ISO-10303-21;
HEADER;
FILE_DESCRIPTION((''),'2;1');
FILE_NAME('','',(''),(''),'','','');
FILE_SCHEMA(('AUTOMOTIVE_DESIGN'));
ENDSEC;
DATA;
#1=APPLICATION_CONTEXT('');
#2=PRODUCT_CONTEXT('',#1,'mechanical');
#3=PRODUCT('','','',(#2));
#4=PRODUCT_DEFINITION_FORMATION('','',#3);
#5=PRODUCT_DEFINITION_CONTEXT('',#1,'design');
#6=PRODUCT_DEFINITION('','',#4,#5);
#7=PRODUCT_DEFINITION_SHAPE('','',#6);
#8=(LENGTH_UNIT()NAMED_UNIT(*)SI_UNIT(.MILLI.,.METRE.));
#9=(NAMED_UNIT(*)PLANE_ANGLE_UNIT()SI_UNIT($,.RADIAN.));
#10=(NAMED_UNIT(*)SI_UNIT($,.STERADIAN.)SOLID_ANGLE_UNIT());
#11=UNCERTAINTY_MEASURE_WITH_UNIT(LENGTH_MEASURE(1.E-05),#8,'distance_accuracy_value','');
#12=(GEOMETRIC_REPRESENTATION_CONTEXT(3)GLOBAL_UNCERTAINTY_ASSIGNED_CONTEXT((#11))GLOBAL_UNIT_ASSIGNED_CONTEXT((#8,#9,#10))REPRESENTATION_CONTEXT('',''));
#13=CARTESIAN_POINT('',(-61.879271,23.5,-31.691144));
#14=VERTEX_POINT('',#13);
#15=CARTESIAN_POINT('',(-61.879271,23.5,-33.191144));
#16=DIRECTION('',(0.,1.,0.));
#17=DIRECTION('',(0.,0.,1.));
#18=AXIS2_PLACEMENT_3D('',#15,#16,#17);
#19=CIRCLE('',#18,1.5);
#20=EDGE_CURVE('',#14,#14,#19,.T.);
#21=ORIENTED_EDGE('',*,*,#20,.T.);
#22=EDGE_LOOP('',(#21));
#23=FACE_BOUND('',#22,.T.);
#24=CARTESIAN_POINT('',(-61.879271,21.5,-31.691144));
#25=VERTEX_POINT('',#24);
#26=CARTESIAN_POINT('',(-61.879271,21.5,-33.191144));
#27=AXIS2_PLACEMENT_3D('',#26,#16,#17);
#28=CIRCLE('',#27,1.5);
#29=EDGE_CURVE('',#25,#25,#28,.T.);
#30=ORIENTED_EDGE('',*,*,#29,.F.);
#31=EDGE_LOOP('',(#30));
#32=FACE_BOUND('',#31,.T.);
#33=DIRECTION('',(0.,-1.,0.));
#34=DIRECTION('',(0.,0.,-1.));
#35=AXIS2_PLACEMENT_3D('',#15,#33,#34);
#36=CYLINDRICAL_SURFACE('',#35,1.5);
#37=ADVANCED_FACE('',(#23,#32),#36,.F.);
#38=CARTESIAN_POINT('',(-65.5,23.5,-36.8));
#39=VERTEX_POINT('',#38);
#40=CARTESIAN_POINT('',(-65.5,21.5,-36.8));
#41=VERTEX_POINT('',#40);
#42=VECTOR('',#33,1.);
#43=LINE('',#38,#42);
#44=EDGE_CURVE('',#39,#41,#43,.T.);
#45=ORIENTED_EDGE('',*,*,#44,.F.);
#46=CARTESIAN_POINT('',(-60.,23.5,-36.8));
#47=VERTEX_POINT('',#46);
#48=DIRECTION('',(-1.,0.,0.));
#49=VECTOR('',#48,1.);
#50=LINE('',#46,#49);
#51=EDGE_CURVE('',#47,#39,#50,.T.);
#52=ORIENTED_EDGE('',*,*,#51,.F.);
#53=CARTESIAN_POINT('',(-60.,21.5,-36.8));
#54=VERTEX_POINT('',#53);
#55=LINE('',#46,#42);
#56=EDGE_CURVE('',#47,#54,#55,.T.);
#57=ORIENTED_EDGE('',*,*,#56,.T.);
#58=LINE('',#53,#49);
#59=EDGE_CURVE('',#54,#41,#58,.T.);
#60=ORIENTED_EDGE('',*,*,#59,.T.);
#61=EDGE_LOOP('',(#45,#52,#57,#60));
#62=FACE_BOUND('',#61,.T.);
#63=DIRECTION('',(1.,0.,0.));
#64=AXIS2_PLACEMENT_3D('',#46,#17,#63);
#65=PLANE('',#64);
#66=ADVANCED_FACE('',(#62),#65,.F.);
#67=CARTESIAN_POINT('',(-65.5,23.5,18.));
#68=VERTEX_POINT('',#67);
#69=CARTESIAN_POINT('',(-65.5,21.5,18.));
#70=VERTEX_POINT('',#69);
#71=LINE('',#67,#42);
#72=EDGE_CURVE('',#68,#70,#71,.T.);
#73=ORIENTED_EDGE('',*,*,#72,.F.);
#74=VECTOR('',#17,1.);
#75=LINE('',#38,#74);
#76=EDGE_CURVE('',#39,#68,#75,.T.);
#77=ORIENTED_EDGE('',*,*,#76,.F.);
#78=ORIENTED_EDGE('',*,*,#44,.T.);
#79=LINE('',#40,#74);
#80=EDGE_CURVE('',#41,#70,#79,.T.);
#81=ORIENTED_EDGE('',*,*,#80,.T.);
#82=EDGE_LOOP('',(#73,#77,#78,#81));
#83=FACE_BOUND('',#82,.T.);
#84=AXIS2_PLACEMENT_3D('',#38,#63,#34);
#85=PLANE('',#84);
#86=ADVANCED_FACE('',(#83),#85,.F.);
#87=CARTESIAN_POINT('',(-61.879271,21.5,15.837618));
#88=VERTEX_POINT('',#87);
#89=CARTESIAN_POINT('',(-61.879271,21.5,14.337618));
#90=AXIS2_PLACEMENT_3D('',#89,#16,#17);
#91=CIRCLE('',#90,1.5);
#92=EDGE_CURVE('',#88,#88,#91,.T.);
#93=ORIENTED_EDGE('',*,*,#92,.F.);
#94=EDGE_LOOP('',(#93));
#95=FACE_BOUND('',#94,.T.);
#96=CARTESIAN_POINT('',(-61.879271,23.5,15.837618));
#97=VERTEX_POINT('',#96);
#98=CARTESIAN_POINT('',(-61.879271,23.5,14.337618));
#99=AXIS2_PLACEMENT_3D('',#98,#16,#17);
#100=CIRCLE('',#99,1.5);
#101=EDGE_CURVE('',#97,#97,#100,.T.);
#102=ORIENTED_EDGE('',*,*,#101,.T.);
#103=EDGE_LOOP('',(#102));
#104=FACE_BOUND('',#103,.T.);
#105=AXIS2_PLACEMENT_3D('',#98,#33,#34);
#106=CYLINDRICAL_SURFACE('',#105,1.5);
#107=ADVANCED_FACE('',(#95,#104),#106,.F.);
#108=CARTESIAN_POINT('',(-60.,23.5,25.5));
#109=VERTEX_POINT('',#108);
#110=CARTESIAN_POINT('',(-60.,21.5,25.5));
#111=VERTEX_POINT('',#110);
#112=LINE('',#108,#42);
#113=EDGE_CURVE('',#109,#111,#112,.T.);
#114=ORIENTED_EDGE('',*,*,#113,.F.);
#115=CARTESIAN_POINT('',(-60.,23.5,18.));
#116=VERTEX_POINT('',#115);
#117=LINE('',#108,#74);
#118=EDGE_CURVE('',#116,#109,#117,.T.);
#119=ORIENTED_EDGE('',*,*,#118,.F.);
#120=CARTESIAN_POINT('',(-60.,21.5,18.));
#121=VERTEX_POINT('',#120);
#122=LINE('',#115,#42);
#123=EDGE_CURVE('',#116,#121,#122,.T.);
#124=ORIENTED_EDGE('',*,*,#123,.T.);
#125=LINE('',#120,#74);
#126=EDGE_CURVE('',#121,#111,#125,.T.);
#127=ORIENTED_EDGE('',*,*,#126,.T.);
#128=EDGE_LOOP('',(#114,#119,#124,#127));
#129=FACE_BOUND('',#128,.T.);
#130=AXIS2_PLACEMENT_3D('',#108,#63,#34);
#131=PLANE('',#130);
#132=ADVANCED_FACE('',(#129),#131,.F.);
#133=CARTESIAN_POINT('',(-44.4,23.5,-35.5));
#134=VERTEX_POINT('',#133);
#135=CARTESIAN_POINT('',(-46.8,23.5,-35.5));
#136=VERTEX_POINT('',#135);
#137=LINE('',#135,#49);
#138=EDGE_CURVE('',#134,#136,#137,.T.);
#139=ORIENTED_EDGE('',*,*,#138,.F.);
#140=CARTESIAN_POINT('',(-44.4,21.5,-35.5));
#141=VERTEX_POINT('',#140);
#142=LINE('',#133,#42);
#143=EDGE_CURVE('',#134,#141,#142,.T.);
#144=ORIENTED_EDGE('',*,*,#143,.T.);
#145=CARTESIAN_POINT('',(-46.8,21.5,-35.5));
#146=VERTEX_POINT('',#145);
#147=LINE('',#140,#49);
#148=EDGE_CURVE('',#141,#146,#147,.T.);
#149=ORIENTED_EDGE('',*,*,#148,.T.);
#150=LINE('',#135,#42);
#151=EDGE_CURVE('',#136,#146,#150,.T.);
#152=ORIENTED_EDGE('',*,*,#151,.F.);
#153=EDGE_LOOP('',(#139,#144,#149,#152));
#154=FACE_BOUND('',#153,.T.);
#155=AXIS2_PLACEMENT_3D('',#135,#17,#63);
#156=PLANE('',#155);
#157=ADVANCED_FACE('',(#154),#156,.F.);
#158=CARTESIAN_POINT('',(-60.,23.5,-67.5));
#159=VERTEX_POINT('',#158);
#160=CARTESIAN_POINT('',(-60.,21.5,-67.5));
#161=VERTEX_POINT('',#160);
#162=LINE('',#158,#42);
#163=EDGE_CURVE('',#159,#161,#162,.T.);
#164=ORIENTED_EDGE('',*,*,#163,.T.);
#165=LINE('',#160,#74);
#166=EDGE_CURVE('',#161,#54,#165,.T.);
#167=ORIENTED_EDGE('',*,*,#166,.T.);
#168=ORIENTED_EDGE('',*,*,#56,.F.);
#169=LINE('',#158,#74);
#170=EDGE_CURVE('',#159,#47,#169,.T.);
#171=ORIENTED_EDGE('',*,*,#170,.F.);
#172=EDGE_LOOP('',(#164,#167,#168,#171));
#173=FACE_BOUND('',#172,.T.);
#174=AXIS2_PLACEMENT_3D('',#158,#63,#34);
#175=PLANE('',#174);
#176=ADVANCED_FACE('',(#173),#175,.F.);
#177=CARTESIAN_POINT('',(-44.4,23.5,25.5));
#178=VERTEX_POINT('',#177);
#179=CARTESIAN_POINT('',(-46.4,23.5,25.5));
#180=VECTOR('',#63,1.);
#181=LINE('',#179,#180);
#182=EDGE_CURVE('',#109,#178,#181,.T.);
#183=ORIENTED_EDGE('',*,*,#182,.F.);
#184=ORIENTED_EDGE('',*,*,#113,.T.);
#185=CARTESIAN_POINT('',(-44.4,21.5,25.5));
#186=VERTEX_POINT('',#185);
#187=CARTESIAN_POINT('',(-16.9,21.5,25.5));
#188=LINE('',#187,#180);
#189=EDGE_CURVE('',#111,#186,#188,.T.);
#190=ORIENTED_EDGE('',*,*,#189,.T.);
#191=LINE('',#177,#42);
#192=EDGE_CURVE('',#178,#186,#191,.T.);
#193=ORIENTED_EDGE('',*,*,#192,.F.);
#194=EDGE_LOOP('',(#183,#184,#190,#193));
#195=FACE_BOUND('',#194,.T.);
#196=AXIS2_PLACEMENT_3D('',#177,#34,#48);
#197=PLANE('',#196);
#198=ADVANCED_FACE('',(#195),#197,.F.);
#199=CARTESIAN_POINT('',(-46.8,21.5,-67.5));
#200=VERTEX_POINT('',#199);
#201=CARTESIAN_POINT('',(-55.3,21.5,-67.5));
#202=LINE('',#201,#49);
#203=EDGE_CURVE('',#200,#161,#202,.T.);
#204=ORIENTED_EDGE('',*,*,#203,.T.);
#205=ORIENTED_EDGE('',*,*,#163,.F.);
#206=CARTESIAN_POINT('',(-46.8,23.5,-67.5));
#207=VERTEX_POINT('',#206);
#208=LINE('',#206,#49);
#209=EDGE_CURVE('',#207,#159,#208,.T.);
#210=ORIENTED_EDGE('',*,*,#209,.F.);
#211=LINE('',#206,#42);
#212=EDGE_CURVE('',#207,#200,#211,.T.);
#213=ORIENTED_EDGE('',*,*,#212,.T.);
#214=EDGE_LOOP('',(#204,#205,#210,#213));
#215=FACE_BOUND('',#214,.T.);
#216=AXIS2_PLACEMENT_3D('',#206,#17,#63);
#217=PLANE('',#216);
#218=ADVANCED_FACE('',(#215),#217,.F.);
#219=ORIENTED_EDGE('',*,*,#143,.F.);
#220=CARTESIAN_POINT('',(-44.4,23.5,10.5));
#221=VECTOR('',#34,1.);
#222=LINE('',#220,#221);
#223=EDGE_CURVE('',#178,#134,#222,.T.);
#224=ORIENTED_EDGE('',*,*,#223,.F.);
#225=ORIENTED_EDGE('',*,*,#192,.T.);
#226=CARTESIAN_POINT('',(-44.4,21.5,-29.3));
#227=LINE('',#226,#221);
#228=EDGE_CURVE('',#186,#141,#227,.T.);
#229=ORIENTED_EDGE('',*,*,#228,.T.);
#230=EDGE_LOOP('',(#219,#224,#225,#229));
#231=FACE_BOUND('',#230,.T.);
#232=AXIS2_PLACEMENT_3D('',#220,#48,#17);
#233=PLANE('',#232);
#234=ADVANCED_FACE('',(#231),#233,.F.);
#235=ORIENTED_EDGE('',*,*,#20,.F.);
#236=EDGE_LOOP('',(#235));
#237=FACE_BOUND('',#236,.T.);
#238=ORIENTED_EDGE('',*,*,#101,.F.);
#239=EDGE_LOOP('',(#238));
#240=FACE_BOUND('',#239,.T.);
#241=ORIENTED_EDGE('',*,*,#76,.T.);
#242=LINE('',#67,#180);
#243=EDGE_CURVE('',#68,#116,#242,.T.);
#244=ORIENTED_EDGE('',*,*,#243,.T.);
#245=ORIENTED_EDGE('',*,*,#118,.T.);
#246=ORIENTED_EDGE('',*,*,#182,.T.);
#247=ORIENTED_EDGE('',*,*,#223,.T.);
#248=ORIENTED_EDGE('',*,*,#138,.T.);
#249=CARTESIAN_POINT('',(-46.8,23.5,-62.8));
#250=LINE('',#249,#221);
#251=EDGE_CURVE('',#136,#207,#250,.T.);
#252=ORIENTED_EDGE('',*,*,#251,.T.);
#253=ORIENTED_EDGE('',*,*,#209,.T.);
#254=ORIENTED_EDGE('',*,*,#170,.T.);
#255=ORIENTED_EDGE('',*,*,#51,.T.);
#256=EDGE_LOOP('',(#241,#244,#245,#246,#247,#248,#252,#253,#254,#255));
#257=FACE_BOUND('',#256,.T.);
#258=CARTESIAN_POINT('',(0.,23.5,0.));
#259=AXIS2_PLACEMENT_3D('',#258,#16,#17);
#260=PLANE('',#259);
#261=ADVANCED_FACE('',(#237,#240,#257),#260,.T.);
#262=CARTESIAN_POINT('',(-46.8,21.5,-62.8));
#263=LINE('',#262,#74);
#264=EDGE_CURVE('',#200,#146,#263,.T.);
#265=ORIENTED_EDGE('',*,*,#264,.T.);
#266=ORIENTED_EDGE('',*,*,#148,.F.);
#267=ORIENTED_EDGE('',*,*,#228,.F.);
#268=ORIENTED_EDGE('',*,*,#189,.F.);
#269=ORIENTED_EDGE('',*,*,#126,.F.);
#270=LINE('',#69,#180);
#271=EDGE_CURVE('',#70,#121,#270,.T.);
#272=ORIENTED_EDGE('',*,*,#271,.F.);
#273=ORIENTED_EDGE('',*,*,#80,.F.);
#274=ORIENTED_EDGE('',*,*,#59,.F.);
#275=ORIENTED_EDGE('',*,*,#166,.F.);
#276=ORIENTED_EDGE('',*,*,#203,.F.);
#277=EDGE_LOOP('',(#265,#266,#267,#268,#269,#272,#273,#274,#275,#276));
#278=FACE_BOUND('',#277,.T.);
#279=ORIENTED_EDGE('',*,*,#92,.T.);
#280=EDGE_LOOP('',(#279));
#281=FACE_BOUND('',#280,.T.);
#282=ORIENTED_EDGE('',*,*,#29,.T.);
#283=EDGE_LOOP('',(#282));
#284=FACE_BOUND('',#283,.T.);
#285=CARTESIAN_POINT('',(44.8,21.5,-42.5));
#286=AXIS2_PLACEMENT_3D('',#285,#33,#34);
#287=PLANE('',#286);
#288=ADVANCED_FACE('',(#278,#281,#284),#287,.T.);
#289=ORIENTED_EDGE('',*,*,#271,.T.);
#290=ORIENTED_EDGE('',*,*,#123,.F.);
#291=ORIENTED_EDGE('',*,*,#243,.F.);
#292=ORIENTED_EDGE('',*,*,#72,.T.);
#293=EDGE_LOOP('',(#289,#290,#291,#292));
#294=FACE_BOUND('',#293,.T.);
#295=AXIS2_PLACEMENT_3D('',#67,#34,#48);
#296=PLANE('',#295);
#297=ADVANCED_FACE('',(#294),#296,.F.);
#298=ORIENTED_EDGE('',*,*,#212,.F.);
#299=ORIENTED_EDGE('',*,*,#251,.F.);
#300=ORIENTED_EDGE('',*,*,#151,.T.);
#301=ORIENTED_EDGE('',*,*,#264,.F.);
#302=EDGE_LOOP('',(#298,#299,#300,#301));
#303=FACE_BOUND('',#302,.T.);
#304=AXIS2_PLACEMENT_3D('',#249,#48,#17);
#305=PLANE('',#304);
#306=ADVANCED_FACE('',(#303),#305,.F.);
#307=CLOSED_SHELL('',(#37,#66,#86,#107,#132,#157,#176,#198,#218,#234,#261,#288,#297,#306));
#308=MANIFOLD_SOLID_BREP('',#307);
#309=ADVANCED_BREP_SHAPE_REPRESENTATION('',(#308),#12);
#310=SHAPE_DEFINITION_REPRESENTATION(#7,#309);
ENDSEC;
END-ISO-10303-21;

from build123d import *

# Parameters (mm, degrees)
BOSS_EXTRUDE1_DEPTH = 1.5
SKETCH2_W           = 4.8
SKETCH2_H           = 18
BOSS_EXTRUDE2_DEPTH = 20
SKETCH3_R           = 1.5
CUT_EXTRUDE1_DEPTH  = 20
SKETCH4_R           = 3
SKETCH4_R_2         = 1.5
SKETCH4_W           = 4.828517764
SKETCH4_H           = 3.2
SKETCH4_W_2         = 5.829541735
SKETCH4_H_2         = 5.702554953
SKETCH4_W_3         = 4.58984945
BOSS_EXTRUDE3_DEPTH = 3.8
SKETCH5_W           = 7.960049614
SKETCH5_H           = 4.589179968
SKETCH5_R           = 1.5
SKETCH5_W_2         = 8.506770289
SKETCH5_H_2         = 5.091999219
SKETCH5_W_3         = 7.172313144
SKETCH5_H_3         = 12.5
SKETCH5_H_4         = 13
BOSS_EXTRUDE4_DEPTH = 4.25
SKETCH6_W           = 6.917388718
SKETCH6_H           = 7.693263261
SKETCH6_R           = 1.5
SKETCH6_W_2         = 6.017640473
SKETCH6_H_2         = 7.169329529
BOSS_EXTRUDE5_DEPTH = 12.5
SKETCH7_R           = 1.5
BOSS_EXTRUDE7_DEPTH = 2
INTERSECT1_DEPTH    = 21.5


# Read off the part's stored shape, not the designer's step: Intersect1
with BuildPart() as part:
    # Sketch1 → Boss-Extrude1 (new body)
    with BuildSketch(Plane(origin=(0, 0, 0), x_dir=(1, 0, 0), z_dir=(0, 1, 0))):
        Polygon((-60, -67.5), (-60, -72.5), (-52, -72.5), (-52, -67.5), (52, -67.5), (52, -72.5), (60, -72.5), (60, -67.5), (60, 67.5), (-60, 67.5), (-60, 36.8), (-65.5, 36.8), (-65.5, 29.3), (-60, 29.3), (-60, 16.8), (-65.5, 16.8), (-65.5, 7.8), (-65.5, -1.2), (-60, -1.2), (-60, -10.5), (-65.5, -10.5), (-65.5, -18), (-60, -18), align=None)
    extrude(amount=BOSS_EXTRUDE1_DEPTH)

    # Sketch2 → Boss-Extrude2 (add)
    with BuildSketch(Plane(origin=(0, 1.5, 0), x_dir=(1, 0, 0), z_dir=(0, 1, 0))):
        Polygon((-58, 62.8), (-58, 29.3), (-60, 29.3), (-65.5, 29.3), (-65.5, 36.8), (-60, 36.8), (-60, 67.5), (-55.3, 67.5), (-55.3, 65.5), align=None)
        with BuildLine():
            Line((-58, -65.5), (58, -65.5))
            Line((58, -65.5), (58, -25.5))
            Line((58, -25.5), (29.8, -25.5))
            Line((29.8, -25.5), (29.8, -18))
            Line((29.8, -18), (58, -18))
            Line((58, -18), (58, 38.5))
            ThreePointArc((58, 38.5), (57.414213562, 39.914213562), (56, 40.5))
            Line((56, 40.5), (51.8, 40.5))
            ThreePointArc((51.8, 40.5), (50.385786438, 41.085786438), (49.8, 42.5))
            Line((49.8, 42.5), (49.8, 48.75))
            Line((49.8, 48.75), (51.3, 48.75))
            Line((51.3, 48.75), (51.3, 47.25))
            Line((51.3, 47.25), (58, 47.25))
            Line((58, 47.25), (58, 51.25))
            Line((58, 51.25), (60, 51.25))
            Line((60, 51.25), (60, -72.5))
            Line((60, -72.5), (52, -72.5))
            Line((52, -72.5), (52, -67.5))
            Line((52, -67.5), (-52, -67.5))
            Line((-52, -67.5), (-52, -72.5))
            Line((-52, -72.5), (-60, -72.5))
            Line((-60, -72.5), (-60, -52.5))
            Line((-60, -52.5), (-58, -52.5))
            Line((-58, -52.5), (-58, -65.5))
        make_face()
        Polygon((-60, 16.8), (-58, 16.8), (-58, -1.2), (-60, -1.2), (-65.5, -1.2), (-65.5, 16.8), align=None)
        Polygon((-60, -10.5), (-58, -10.5), (-58, -38), (-60, -38), (-60, -18), (-65.5, -18), (-65.5, -10.5), align=None)
        with BuildLine():
            Line((-48.8, 67.5), (-48.8, 65.5))
            Line((-48.8, 65.5), (-46.8, 62.8))
            Line((-46.8, 62.8), (-46.8, 58.5))
            Line((-46.8, 58.5), (-44.8, 58.5))
            Line((-44.8, 58.5), (-37.8, 64.5))
            Line((-37.8, 64.5), (38.8, 64.5))
            Line((38.8, 64.5), (44.8, 58.5))
            Line((44.8, 58.5), (44.8, 46.5))
            Line((44.8, 46.5), (41.3, 46.5))
            Line((41.3, 46.5), (41.3, 42.5))
            Line((41.3, 42.5), (38.85, 42.5))
            Line((38.85, 42.5), (38.85, 40.5))
            Line((38.85, 40.5), (44.8, 40.5))
            ThreePointArc((44.8, 40.5), (46.214213562, 41.085786438), (46.8, 42.5))
            Line((46.8, 42.5), (46.8, 46.5))
            Line((46.8, 46.5), (46.8, 57.25))
            Line((46.8, 57.25), (51.3, 57.25))
            Line((51.3, 57.25), (51.3, 58.75))
            Line((51.3, 58.75), (58, 58.75))
            Line((58, 58.75), (58, 54.75))
            Line((58, 54.75), (60, 54.75))
            Line((60, 54.75), (60, 67.5))
            Line((60, 67.5), (-48.8, 67.5))
        make_face()
        Polygon((-46.8, 46.5), (-39.5, 46.5), (-39.5, 42.5), (-37.05, 42.5), (-37.05, 40.5), (-46.8, 40.5), align=None)
        Polygon((-33.55, 42.5), (-33.55, 40.5), (-18.65, 40.5), (-18.65, 42.5), (-21.1, 42.5), (-21.1, 46.5), (-31.1, 46.5), (-31.1, 42.5), align=None)
        Polygon((-15.55, 40.5), (-0.65, 40.5), (-0.65, 42.5), (-3.1, 42.5), (-3.1, 46.5), (-13.1, 46.5), (-13.1, 42.5), (-15.55, 42.5), align=None)
        Polygon((2.45, 40.5), (17.35, 40.5), (17.35, 42.5), (14.9, 42.5), (14.9, 46.5), (4.9, 46.5), (4.9, 42.5), (2.45, 42.5), align=None)
        Polygon((20.45, 40.5), (35.35, 40.5), (35.35, 42.5), (32.9, 42.5), (32.9, 46.5), (22.9, 46.5), (22.9, 42.5), (20.45, 42.5), align=None)
        Polygon((-46.8, 35.5), (-49.2, 35.5), (-49.2, 29.3), (-44.4, 29.3), (-44.4, 35.5), align=None)
        with Locations((-46.8, 7.8)):
            Rectangle(SKETCH2_W, SKETCH2_H)
        Polygon((-49.2, -10.5), (-44.4, -10.5), (-44.4, -18), (-16.9, -18), (-16.9, -25.5), (-46.4, -25.5), (-46.4, -19.9), (-49.2, -14), align=None)
    extrude(amount=BOSS_EXTRUDE2_DEPTH)

    # Sketch3 → Cut-Extrude1 (cut)
    with BuildSketch(Plane(origin=(0, 21.5, 0), x_dir=(1, 0, 0), z_dir=(0, 1, 0))):
        with Locations(Location((52.774715074, 63.354517547, 0), (0, 0, 270))):
            Circle(SKETCH3_R)
        with Locations(Location((-43.84271688, 64.854517547, 0), (0, 0, 270))):
            Circle(SKETCH3_R)
        with Locations(Location((-61.879270776, 33.191143968, 0), (0, 0, 270))):
            Circle(SKETCH3_R)
        with Locations(Location((-61.879270776, -14.337618299, 0), (0, 0, 270))):
            Circle(SKETCH3_R)
        with Locations(Location((54.274715074, 43.945098524, 0), (0, 0, 270))):
            Circle(SKETCH3_R)
        with Locations(Location((-21.029637868, -21.862387391, 0), (0, 0, 270))):
            Circle(SKETCH3_R)
        with Locations(Location((34.3, -21.75, 0), (0, 0, 270))):
            Circle(SKETCH3_R)
        with Locations(Location((-56, -69, 0), (0, 0, 270))):
            Circle(SKETCH3_R)
        with Locations(Location((56, -69, 0), (0, 0, 270))):
            Circle(SKETCH3_R)
    extrude(amount=-CUT_EXTRUDE1_DEPTH, mode=Mode.SUBTRACT)

    # Sketch4 → Boss-Extrude3 (add)
    # profile 1 of 5: a face of its own
    with BuildSketch(Plane(origin=(0, 1.5, 0), x_dir=(1, 0, 0), z_dir=(0, 1, 0))):
        with Locations(Location((21.544764921, -8.320497528, 0), (0, 0, 90))):
            Circle(SKETCH4_R)
        with Locations(Location((21.544764921, -8.320497528, 0), (0, 0, 90))):
            Circle(SKETCH4_R_2, mode=Mode.SUBTRACT)
    # profile 2 of 5: a face of its own
    with BuildSketch(Plane(origin=(0, 1.5, 0), x_dir=(1, 0, 0), z_dir=(0, 1, 0))):
        with Locations(Location((21.544764921, 19.479502472, 0), (0, 0, 90))):
            Circle(SKETCH4_R)
        with Locations(Location((21.544764921, 19.479502472, 0), (0, 0, 90))):
            Circle(SKETCH4_R_2, mode=Mode.SUBTRACT)
    # profile 3 of 5: a face of its own
    with BuildSketch(Plane(origin=(0, 1.5, 0), x_dir=(1, 0, 0), z_dir=(0, 1, 0))):
        with Locations((-29.2, 33.9)):
            Rectangle(SKETCH4_W, SKETCH4_H)
        with Locations(Location((-29.2, 33.9, 0), (0, 0, 90))):
            Circle(SKETCH4_R_2, mode=Mode.SUBTRACT)
    # profile 4 of 5: a face of its own
    with BuildSketch(Plane(origin=(0, 1.5, 0), x_dir=(1, 0, 0), z_dir=(0, 1, 0))):
        with Locations((-30.25253813, -15.148722524)):
            Rectangle(SKETCH4_W_2, SKETCH4_H_2)
        with Locations(Location((-30.3, -14.4, 0), (0, 0, 90))):
            Circle(SKETCH4_R_2, mode=Mode.SUBTRACT)
    # profile 5 of 5: a face of its own
    with BuildSketch(Plane(origin=(0, 1.5, 0), x_dir=(1, 0, 0), z_dir=(0, 1, 0))):
        with Locations((51.718864017, -15.148722524)):
            Rectangle(SKETCH4_W_3, SKETCH4_H_2)
        with Locations(Location((51.8, -14.4, 0), (0, 0, 90))):
            Circle(SKETCH4_R_2, mode=Mode.SUBTRACT)
    extrude(amount=BOSS_EXTRUDE3_DEPTH)

    # Sketch5 → Boss-Extrude4 (add)
    # profile 1 of 4: a face of its own
    with BuildSketch(Plane(origin=(0, 1.5, 0), x_dir=(1, 0, 0), z_dir=(0, 1, 0))):
        with Locations((-54.019975193, -35.705410016)):
            Rectangle(SKETCH5_W, SKETCH5_H)
        with Locations(Location((-52.773553759, -35.8, 0), (0, 0, 270))):
            Circle(SKETCH5_R, mode=Mode.SUBTRACT)
    # profile 2 of 4: a face of its own
    with BuildSketch(Plane(origin=(0, 1.5, 0), x_dir=(1, 0, 0), z_dir=(0, 1, 0))):
        with Locations((-53.746614856, -55.04599961)):
            Rectangle(SKETCH5_W_2, SKETCH5_H_2)
        with Locations(Location((-52.773553759, -54.7, 0), (0, 0, 270))):
            Circle(SKETCH5_R, mode=Mode.SUBTRACT)
    # profile 3 of 4: a face of its own
    with BuildSketch(Plane(origin=(0, 1.5, 0), x_dir=(1, 0, 0), z_dir=(0, 1, 0))):
        with Locations((-27.40354529, -31.75)):
            Rectangle(SKETCH5_W_3, SKETCH5_H_3)
        with Locations(Location((-27.173553759, -35.8, 0), (0, 0, 270))):
            Circle(SKETCH5_R, mode=Mode.SUBTRACT)
    # profile 4 of 4: a face of its own
    with BuildSketch(Plane(origin=(0, 1.5, 0), x_dir=(1, 0, 0), z_dir=(0, 1, 0))):
        with Locations((-27.40354529, -59)):
            Rectangle(SKETCH5_W_3, SKETCH5_H_4)
        with Locations(Location((-27.173553759, -54.7, 0), (0, 0, 270))):
            Circle(SKETCH5_R, mode=Mode.SUBTRACT)
    extrude(amount=BOSS_EXTRUDE4_DEPTH)

    # Sketch6 → Boss-Extrude5 (add)
    # profile 1 of 4: a face of its own
    with BuildSketch(Plane(origin=(0, 1.5, 0), x_dir=(1, 0, 0), z_dir=(0, 1, 0))):
        with Locations((-20.358694359, -29.346631631)):
            Rectangle(SKETCH6_W, SKETCH6_H)
        with Locations(Location((-19.26, -30.5, 0), (0, 0, 270))):
            Circle(SKETCH6_R, mode=Mode.SUBTRACT)
    # profile 2 of 4: a face of its own
    with BuildSketch(Plane(origin=(0, 1.5, 0), x_dir=(1, 0, 0), z_dir=(0, 1, 0))):
        with Locations((54.991179763, -29.346631631)):
            Rectangle(SKETCH6_W_2, SKETCH6_H)
        with Locations(Location((55.14, -30.5, 0), (0, 0, 270))):
            Circle(SKETCH6_R, mode=Mode.SUBTRACT)
    # profile 3 of 4: a face of its own
    with BuildSketch(Plane(origin=(0, 1.5, 0), x_dir=(1, 0, 0), z_dir=(0, 1, 0))):
        with Locations((54.991179763, -61.915335236)):
            Rectangle(SKETCH6_W_2, SKETCH6_H_2)
        with Locations(Location((55.14, -61.1, 0), (0, 0, 270))):
            Circle(SKETCH6_R, mode=Mode.SUBTRACT)
    # profile 4 of 4: a face of its own
    with BuildSketch(Plane(origin=(0, 1.5, 0), x_dir=(1, 0, 0), z_dir=(0, 1, 0))):
        with Locations((-20.358694359, -61.915335236)):
            Rectangle(SKETCH6_W, SKETCH6_H_2)
        with Locations(Location((-19.26, -61.1, 0), (0, 0, 270))):
            Circle(SKETCH6_R, mode=Mode.SUBTRACT)
    extrude(amount=BOSS_EXTRUDE5_DEPTH)

    # Intersect1 outline → Intersect1 (cut)
    with BuildSketch(Plane(origin=(0, 0, 0), x_dir=(1, 0, 0), z_dir=(0, 1, 0))):
        Polygon((-60, -72.5), (-52, -72.5), (-52, -67.5), (52, -67.5), (52, -72.5), (60, -72.5), (60, 67.5), (-60, 67.5), (-60, 36.8), (-65.5, 36.8), (-65.5, 29.3), (-60, 29.3), (-60, 16.8), (-65.5, 16.8), (-65.5, -1.2), (-60, -1.2), (-60, -10.5), (-65.5, -10.5), (-65.5, -18), (-60, -18), align=None)
    extrude(amount=INTERSECT1_DEPTH, mode=Mode.SUBTRACT)


with BuildPart() as body_2:
    # Sketch7 → Boss-Extrude7 (new body)
    with BuildSketch(Plane(origin=(0, 21.5, 0), x_dir=(1, 0, 0), z_dir=(0, 1, 0))):
        Polygon((-60, 67.5), (-60, 36.8), (-65.5, 36.8), (-65.5, -18), (-60, -18), (-60, -25.5), (-46.4, -25.5), (-44.4, -25.5), (-44.4, -10.5), (-44.4, 35.5), (-46.8, 35.5), (-46.8, 62.8), (-46.8, 67.5), align=None)
        with Locations(Location((-61.879270776, -14.337618299, 0), (0, 0, 270))):
            Circle(SKETCH7_R, mode=Mode.SUBTRACT)
        with Locations(Location((-61.879270776, 33.191143968, 0), (0, 0, 270))):
            Circle(SKETCH7_R, mode=Mode.SUBTRACT)
    extrude(amount=BOSS_EXTRUDE7_DEPTH)


solid = body_2.part
